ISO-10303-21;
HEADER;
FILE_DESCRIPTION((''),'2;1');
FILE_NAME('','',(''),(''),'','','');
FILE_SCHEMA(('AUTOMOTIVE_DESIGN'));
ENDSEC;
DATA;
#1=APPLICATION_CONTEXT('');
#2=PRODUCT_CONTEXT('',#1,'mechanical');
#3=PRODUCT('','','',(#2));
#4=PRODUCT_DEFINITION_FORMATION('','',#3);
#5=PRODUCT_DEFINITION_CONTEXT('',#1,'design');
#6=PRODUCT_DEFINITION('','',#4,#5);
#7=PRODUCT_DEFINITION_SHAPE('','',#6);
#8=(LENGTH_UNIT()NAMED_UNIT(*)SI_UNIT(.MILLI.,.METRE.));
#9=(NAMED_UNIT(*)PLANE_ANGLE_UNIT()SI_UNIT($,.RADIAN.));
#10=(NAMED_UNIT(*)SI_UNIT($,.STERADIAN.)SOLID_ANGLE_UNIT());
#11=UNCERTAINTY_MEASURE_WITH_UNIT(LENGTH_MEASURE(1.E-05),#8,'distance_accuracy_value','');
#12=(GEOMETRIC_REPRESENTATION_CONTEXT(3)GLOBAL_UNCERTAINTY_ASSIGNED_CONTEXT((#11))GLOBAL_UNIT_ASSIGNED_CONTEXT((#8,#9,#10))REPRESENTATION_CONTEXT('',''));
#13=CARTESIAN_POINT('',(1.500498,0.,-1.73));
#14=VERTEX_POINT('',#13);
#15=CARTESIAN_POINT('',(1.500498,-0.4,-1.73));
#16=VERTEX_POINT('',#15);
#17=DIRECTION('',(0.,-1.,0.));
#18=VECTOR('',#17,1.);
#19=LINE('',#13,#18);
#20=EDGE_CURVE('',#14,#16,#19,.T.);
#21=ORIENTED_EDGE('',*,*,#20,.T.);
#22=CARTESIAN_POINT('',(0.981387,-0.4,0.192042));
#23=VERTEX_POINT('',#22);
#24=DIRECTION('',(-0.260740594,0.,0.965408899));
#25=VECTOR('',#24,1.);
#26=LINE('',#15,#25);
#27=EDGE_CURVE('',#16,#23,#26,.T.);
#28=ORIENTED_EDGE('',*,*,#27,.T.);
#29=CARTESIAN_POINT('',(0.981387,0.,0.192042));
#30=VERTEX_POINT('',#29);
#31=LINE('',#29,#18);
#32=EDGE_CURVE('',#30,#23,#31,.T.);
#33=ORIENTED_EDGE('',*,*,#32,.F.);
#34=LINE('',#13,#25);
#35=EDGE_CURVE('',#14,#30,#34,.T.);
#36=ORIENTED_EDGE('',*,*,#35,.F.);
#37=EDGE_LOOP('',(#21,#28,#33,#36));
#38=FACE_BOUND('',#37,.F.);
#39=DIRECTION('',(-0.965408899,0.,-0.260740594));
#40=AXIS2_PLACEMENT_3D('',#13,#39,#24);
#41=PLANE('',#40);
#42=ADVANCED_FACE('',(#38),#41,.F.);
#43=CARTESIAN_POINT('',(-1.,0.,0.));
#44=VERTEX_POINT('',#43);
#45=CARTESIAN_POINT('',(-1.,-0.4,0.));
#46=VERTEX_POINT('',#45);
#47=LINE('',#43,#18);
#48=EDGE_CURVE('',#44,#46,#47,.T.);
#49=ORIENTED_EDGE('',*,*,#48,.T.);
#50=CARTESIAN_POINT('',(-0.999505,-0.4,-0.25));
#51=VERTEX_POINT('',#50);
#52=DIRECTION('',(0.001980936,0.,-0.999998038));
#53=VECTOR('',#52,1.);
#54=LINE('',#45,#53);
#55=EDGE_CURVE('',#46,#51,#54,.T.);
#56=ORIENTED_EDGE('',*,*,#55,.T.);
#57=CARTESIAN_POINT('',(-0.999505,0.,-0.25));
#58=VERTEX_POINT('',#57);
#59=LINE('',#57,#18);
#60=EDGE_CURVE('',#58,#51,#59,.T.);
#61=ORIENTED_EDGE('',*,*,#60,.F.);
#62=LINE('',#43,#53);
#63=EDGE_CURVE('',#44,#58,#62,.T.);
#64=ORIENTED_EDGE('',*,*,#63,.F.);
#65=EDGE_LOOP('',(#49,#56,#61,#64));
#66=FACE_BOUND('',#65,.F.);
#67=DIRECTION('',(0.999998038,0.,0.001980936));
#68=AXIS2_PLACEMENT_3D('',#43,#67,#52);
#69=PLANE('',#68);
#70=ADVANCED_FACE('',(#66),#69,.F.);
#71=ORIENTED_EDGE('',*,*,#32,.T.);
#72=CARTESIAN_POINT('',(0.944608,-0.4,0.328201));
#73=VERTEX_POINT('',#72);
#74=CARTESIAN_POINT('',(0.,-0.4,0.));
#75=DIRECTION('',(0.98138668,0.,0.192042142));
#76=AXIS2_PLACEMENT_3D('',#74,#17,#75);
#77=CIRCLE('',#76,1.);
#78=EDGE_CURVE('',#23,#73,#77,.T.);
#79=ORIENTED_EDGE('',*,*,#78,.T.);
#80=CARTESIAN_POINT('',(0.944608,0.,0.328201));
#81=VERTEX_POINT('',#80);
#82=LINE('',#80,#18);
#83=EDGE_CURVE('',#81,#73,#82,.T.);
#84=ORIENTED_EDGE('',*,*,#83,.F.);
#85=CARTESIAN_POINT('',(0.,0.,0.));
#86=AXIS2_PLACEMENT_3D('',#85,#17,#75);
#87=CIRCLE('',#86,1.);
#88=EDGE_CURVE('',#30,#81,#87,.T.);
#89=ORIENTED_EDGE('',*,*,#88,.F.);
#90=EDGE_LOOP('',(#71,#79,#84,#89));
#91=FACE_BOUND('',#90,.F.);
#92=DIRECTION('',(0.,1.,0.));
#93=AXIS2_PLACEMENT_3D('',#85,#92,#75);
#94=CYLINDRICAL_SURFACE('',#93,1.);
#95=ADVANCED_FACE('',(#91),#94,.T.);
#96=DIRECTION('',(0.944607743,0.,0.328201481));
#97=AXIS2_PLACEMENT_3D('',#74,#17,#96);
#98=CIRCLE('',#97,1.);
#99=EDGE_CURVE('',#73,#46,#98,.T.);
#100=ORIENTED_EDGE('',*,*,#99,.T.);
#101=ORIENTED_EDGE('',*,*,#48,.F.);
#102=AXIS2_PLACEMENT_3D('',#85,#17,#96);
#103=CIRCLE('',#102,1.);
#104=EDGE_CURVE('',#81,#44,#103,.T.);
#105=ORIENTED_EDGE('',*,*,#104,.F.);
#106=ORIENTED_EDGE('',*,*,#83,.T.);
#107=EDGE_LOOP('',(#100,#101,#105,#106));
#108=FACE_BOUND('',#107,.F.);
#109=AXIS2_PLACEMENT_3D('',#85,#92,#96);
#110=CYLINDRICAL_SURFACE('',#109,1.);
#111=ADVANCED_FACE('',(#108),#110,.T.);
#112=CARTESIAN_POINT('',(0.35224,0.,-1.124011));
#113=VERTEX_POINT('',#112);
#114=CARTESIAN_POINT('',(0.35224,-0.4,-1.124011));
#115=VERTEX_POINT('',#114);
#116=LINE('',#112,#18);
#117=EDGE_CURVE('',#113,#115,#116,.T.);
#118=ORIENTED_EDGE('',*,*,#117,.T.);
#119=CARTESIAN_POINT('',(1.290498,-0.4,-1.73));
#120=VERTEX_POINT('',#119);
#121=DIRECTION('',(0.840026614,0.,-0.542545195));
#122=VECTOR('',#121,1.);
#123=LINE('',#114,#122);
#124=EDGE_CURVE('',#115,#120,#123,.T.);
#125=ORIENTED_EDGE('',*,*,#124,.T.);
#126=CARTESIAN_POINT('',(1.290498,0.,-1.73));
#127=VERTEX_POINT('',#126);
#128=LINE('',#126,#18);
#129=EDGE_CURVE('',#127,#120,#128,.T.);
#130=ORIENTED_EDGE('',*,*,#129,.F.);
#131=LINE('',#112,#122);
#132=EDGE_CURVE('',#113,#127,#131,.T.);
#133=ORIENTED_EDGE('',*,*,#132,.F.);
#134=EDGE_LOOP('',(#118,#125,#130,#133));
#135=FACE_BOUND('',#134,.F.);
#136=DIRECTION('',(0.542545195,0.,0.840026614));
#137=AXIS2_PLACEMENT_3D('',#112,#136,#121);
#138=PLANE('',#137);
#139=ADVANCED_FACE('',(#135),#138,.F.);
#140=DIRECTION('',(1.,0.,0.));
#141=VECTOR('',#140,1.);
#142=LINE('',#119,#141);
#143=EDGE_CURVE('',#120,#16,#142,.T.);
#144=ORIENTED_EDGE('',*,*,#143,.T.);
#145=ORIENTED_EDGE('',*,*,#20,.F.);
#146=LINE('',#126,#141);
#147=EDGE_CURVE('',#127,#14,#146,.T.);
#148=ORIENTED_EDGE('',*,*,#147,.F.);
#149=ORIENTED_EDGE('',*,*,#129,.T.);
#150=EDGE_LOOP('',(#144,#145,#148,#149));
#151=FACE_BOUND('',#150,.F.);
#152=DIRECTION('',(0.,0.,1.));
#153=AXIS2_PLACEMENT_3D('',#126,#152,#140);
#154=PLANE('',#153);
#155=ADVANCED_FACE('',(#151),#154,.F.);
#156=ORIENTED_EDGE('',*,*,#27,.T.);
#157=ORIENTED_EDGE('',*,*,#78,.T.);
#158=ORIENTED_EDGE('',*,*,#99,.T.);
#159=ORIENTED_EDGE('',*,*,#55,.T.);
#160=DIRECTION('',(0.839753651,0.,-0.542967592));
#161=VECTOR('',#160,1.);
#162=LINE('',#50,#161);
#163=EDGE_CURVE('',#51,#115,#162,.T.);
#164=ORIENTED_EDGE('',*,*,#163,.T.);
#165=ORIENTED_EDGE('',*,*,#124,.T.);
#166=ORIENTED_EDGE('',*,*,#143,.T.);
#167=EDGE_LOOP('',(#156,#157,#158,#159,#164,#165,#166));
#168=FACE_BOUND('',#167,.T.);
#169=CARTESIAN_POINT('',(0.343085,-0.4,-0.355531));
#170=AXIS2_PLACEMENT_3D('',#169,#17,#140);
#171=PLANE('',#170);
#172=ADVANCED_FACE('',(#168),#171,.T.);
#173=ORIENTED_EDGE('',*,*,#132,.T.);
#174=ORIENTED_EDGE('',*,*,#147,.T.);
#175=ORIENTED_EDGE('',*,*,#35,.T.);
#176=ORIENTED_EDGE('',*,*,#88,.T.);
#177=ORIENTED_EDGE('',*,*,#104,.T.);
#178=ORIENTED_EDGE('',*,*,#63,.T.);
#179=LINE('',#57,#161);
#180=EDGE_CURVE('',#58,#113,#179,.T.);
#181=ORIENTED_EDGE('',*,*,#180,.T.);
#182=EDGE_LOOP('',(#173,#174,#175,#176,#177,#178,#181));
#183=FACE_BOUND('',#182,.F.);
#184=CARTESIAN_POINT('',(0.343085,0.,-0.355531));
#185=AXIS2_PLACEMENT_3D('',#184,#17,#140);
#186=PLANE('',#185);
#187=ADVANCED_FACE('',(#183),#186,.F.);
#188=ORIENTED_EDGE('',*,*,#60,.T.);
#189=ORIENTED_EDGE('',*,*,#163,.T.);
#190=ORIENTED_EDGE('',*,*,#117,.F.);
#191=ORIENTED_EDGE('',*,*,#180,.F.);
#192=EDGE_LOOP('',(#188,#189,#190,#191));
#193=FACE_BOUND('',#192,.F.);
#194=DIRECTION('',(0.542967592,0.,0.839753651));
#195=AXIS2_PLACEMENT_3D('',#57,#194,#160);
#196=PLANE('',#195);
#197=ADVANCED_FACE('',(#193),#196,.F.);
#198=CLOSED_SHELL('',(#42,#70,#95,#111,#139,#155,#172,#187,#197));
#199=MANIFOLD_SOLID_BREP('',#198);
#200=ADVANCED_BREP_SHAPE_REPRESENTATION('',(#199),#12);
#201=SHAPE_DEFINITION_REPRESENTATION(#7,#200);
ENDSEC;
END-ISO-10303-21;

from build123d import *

# Parameters (mm, degrees)
F1_DEPTH = 0.4


# Not quite as in the source:
# - ends of sketch curves that miss each other by under 0.0002 mm in the source are joined


with BuildPart() as f1:
    # F0 (on Front) → F1 (new body)
    with BuildSketch(Plane.XZ):
        with BuildLine():
            ThreePointArc((0.9446077427, 0.3282014815), (-0.166421539, 0.9860547), (-1, 0))
            Line((-1, 0), (-0.9995047651, -0.2500000049))
            Line((-0.9995047651, -0.2500000049), (0.3522404072, -1.1240108766))
            Line((0.3522404072, -1.1240108766), (1.2904977108, -1.73))
            Line((1.2904977108, -1.73), (1.5004977108, -1.73))
            Line((1.5004977108, -1.73), (0.9813866799, 0.1920421425))
            Line((0.9813866799, 0.1920421425), (0.9446077427, 0.3282014815))
        make_face()
        with BuildLine():
            ThreePointArc((0.9813866799, 0.1920421425), (0.9654006787, 0.2607710291), (0.9446077427, 0.3282014815))
            Line((0.9446077427, 0.3282014815), (0.9813866799, 0.1920421425))
        make_face()
    extrude(amount=F1_DEPTH)


solid = f1.part
